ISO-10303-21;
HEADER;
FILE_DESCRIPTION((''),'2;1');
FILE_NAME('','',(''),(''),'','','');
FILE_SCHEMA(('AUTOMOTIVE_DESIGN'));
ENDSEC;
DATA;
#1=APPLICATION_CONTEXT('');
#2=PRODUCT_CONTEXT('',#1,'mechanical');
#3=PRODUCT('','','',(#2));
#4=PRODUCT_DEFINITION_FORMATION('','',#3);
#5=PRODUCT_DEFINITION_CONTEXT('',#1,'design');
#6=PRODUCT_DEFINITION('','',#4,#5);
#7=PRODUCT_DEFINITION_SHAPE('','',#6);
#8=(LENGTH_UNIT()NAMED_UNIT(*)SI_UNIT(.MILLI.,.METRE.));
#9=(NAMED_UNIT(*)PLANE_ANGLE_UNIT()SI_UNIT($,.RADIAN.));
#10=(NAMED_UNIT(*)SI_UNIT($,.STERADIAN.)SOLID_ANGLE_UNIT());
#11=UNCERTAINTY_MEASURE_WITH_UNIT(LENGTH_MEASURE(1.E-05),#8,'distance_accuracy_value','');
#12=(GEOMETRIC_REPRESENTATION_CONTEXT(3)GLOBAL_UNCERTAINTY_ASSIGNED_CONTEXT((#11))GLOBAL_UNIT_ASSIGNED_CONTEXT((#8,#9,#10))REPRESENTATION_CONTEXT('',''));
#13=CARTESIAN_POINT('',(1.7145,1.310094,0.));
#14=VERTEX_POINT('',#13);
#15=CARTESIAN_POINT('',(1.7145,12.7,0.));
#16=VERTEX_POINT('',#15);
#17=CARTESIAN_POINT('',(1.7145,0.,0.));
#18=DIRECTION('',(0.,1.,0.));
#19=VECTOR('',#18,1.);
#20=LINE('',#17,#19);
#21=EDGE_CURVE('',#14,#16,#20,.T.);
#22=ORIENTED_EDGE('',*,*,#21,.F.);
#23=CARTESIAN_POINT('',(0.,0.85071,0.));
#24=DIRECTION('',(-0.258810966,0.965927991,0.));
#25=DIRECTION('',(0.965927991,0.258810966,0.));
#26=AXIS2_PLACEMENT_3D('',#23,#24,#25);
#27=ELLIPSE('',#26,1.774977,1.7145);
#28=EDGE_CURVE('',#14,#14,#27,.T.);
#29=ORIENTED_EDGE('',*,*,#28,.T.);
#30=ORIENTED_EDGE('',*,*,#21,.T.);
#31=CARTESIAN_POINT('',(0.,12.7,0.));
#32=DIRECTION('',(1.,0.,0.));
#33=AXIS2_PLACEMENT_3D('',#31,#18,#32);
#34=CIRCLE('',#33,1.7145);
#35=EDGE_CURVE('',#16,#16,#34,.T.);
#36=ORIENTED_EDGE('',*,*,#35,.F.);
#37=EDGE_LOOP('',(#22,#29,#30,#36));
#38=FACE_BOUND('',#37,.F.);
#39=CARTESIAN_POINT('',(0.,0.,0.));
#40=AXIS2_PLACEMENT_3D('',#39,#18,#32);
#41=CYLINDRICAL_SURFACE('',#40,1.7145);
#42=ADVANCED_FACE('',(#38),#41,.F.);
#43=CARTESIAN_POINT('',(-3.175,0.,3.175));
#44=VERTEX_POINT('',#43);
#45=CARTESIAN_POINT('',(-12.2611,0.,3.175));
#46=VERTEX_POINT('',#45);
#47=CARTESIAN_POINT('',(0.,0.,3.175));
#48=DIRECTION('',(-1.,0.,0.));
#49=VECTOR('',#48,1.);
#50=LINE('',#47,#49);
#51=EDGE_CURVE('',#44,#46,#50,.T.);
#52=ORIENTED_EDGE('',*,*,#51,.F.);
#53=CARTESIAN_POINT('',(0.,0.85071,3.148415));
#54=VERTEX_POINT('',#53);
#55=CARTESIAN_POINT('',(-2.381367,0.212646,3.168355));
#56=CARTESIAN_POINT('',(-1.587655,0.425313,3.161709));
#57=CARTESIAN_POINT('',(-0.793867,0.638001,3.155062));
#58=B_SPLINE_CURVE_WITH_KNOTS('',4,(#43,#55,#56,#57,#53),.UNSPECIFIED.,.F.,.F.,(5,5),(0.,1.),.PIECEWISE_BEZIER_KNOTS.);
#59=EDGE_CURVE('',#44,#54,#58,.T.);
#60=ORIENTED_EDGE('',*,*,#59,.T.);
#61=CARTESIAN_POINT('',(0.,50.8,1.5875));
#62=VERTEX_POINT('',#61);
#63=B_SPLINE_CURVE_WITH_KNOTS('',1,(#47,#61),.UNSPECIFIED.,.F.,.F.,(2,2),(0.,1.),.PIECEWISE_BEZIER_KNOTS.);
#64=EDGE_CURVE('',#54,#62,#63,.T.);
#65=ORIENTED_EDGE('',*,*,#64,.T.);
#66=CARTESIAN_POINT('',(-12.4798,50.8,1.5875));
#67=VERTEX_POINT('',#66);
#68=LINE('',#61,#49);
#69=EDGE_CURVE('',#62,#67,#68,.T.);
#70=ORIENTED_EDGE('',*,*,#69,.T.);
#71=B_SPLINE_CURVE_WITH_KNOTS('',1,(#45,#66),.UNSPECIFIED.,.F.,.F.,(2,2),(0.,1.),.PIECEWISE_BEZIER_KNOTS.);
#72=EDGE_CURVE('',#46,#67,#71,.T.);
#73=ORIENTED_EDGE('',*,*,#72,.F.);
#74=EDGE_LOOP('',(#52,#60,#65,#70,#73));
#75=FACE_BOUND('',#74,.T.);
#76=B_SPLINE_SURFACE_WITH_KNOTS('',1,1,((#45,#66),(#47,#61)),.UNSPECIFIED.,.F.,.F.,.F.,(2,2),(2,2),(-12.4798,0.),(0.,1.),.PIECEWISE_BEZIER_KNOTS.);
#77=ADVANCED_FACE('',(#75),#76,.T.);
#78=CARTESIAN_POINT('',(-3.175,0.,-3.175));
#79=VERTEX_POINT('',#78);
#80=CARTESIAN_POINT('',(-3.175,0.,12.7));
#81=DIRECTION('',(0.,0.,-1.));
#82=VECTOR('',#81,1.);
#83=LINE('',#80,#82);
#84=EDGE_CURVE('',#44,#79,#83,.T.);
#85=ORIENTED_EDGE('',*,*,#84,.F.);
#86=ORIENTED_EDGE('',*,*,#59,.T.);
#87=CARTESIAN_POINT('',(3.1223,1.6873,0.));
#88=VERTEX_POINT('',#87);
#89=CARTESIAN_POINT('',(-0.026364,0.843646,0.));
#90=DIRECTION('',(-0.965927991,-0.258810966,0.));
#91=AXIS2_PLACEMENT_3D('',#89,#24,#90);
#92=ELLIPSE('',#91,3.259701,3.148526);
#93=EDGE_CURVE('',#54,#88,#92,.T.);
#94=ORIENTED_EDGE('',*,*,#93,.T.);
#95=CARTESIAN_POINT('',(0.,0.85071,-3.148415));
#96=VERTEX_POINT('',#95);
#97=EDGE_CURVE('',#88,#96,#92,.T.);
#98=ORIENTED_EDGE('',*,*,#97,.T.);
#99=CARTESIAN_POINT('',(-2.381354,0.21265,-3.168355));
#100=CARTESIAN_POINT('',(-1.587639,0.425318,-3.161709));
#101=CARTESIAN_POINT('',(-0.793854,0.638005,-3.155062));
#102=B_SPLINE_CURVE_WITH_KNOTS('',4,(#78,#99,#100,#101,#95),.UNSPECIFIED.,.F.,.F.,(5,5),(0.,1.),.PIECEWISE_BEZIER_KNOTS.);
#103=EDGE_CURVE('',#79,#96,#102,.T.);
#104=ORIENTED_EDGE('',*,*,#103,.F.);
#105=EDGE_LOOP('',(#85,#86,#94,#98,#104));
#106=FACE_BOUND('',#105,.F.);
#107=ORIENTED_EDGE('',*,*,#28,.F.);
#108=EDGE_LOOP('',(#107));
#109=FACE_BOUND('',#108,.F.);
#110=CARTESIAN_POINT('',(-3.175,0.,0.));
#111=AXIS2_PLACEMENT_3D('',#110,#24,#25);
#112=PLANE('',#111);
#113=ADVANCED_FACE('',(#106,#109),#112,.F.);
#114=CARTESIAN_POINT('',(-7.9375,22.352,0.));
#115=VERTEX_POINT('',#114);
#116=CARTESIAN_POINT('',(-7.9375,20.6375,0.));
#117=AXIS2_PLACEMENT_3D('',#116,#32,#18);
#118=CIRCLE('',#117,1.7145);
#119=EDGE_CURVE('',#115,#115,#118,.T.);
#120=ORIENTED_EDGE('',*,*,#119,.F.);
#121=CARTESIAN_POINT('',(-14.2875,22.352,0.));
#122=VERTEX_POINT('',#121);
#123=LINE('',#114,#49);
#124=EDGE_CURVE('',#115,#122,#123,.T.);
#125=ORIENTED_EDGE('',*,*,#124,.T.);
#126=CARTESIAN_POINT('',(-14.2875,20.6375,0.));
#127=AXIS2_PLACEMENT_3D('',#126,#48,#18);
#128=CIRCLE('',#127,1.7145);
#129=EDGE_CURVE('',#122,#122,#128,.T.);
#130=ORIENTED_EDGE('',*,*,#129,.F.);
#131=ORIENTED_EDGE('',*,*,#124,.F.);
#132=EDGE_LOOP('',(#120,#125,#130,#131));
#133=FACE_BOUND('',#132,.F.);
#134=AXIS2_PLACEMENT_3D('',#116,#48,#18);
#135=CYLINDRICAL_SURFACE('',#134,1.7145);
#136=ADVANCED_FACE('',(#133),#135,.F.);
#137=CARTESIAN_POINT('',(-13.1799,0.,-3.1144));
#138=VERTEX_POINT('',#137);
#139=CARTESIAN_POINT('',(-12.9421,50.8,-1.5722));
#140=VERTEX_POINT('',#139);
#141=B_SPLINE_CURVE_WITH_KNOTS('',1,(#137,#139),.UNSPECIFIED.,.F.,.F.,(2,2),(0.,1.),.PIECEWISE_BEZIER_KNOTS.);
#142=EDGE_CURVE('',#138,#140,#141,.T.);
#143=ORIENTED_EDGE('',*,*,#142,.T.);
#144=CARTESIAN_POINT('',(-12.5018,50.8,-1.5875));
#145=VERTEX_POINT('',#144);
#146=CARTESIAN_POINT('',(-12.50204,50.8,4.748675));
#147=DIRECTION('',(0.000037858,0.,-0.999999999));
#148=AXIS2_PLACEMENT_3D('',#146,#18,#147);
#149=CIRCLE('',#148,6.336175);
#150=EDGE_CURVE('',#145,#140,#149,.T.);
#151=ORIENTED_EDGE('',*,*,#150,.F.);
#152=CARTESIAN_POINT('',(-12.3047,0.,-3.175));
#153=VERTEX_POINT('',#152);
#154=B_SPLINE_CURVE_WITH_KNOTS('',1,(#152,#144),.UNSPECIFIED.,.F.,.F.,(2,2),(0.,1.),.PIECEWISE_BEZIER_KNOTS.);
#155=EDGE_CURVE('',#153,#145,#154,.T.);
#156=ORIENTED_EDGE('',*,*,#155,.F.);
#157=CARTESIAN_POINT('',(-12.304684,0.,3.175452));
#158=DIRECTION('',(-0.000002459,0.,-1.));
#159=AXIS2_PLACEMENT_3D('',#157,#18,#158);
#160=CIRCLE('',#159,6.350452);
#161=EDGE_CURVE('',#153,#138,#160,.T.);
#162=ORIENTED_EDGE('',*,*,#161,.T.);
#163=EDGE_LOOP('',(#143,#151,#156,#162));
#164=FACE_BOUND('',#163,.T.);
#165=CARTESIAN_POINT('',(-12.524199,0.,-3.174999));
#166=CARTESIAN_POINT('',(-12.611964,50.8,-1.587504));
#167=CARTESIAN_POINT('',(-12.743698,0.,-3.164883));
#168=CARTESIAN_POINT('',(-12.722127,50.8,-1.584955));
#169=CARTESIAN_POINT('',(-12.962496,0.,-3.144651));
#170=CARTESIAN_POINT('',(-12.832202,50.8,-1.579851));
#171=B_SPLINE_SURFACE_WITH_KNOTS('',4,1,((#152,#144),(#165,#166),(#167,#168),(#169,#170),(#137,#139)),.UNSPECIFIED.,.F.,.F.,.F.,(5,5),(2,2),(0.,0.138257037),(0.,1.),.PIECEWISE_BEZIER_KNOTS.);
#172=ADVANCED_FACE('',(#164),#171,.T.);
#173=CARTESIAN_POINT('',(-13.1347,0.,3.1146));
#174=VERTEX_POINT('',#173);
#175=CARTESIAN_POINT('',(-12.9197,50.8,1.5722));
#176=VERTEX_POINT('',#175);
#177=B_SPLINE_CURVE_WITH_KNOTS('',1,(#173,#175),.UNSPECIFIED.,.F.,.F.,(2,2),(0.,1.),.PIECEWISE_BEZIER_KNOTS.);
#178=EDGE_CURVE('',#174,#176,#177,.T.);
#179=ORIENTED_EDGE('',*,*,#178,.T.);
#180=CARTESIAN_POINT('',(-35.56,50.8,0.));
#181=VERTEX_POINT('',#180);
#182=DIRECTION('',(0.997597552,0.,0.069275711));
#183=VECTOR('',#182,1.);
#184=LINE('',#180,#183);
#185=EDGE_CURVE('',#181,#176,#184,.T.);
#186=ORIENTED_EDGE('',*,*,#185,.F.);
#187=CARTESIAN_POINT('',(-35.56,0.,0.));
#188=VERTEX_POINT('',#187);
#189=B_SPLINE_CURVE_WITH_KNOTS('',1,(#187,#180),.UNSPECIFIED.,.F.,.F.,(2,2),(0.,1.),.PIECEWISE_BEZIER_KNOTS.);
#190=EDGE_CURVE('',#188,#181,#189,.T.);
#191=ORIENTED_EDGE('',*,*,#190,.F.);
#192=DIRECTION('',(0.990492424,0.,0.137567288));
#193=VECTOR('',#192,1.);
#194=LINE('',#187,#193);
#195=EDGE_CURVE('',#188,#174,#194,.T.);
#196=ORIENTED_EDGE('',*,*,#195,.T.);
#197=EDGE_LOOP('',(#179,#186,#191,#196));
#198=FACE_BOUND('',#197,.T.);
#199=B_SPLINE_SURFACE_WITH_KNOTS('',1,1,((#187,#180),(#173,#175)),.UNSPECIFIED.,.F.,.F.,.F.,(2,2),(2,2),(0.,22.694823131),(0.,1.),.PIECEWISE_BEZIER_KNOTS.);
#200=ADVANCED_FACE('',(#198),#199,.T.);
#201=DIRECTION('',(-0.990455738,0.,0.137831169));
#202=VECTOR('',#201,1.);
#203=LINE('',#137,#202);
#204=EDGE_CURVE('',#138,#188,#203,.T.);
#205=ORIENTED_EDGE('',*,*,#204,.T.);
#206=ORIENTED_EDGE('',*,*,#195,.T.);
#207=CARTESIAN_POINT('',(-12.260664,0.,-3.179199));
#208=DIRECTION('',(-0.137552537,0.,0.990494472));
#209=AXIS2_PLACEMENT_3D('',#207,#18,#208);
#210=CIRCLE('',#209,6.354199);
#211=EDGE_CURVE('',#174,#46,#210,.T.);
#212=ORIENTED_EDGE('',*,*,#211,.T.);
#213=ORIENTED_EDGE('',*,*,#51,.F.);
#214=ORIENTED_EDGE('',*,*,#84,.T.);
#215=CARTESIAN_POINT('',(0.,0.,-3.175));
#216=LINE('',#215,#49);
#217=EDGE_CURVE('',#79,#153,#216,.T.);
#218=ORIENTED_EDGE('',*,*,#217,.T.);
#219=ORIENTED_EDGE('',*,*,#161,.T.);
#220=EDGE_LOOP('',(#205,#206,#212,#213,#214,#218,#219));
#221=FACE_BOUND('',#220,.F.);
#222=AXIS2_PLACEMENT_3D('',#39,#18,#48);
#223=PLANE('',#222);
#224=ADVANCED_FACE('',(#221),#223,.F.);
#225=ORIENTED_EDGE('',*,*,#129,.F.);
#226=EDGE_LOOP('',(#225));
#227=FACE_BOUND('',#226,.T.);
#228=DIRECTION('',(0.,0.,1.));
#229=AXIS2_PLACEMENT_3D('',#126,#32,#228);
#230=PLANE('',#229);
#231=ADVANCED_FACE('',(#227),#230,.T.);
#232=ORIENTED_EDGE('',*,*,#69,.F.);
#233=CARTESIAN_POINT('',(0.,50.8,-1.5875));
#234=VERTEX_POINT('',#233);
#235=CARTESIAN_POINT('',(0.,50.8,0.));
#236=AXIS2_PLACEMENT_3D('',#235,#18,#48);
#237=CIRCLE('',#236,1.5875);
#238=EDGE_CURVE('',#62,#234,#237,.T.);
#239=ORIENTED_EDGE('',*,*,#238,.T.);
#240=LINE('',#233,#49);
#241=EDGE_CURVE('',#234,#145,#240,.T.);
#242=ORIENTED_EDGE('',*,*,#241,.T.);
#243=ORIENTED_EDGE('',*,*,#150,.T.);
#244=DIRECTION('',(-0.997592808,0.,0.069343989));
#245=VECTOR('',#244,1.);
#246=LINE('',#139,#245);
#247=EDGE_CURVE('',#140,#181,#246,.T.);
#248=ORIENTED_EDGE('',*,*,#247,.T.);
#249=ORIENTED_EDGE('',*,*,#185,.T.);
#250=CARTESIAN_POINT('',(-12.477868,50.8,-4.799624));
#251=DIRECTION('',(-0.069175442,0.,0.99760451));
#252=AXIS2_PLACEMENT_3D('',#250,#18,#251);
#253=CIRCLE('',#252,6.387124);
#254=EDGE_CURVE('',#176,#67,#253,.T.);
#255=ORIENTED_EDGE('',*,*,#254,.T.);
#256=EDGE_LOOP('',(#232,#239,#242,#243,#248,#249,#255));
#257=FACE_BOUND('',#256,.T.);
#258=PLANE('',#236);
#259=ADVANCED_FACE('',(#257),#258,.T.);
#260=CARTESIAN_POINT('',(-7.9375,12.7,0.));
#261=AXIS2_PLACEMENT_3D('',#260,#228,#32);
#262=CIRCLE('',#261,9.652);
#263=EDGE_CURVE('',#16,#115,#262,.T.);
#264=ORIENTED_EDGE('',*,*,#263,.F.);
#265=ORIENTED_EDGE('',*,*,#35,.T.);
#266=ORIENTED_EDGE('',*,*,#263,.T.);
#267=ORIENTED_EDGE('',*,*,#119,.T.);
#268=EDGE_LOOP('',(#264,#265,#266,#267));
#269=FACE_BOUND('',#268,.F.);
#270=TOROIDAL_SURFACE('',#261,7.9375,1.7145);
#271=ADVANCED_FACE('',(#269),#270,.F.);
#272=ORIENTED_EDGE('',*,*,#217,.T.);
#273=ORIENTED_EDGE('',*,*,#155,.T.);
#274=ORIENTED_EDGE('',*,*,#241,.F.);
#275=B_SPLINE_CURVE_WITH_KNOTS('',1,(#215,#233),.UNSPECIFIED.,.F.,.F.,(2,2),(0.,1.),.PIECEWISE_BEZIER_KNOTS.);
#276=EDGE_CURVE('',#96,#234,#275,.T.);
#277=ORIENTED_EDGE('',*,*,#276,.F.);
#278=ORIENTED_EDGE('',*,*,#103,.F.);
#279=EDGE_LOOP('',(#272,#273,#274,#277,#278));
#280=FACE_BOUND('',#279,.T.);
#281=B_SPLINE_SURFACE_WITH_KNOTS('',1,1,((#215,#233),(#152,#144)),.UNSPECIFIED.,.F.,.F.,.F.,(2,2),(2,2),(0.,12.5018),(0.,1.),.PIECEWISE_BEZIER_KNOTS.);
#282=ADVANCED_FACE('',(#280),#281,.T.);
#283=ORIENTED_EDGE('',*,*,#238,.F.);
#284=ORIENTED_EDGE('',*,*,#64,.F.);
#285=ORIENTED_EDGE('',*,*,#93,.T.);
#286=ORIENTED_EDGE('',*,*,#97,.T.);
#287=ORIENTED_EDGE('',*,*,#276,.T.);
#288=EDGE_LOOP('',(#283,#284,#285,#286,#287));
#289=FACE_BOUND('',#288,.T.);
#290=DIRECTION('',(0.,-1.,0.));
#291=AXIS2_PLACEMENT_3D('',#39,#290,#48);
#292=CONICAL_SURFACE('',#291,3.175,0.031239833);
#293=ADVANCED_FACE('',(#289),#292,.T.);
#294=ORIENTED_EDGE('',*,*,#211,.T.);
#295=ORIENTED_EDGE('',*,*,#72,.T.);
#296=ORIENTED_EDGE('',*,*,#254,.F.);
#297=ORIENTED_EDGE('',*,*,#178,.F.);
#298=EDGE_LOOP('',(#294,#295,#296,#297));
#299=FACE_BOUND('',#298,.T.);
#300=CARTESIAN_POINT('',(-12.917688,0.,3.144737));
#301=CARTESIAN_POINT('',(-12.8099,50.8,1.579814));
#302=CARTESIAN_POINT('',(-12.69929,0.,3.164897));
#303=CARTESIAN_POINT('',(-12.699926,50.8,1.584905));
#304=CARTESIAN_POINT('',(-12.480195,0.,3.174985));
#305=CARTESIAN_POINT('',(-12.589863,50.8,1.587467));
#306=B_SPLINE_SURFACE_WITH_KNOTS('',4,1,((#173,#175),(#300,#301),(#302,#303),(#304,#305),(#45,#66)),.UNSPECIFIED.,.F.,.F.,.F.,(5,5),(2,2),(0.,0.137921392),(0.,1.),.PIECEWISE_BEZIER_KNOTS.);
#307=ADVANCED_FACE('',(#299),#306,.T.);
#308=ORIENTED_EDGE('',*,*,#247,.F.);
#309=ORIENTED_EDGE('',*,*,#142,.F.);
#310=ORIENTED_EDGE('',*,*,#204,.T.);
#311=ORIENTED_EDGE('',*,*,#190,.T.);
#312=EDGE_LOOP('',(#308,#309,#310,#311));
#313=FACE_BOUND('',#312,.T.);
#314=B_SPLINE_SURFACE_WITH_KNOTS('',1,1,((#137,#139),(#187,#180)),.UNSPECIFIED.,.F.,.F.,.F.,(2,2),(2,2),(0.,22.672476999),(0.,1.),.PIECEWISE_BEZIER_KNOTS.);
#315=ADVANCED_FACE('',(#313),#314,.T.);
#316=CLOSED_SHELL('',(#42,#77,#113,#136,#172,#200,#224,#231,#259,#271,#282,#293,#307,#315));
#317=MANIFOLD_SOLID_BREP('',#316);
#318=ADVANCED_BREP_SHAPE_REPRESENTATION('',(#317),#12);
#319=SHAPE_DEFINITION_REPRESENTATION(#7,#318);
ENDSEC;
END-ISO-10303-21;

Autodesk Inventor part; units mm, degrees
ref_plane "YZ Plane" through (0, 0, 0) normal (1, 0, 0) x (0, 1, 0)
ref_plane "XY Plane" through (0, 0, 0) normal (0, 0, 1) x (1, 0, 0)
sketch "Sketch2" plane through (0, 0, 0) normal (0, 1, 0) x (-1, 0, 0)
  circle A0 centre (0, 0) radius 3.175
  line L0 (0, 0) -> (35.56, 0)
  line L1 (0, 3.175) -> (12.2611, 3.175)
  line L2 (0, -3.175) -> (12.3047, -3.175)
  line L3 (13.1799, -3.1144) -> (35.56, 0)
  line L4 (35.56, 0) -> (13.1347, 3.1146)
  arc A1 (13.1347, 3.1146) -> (12.2611, 3.175) centre (12.2611, -3.175) ccw
  arc A2 (12.3047, -3.175) -> (13.1799, -3.1144) centre (12.3047, 3.175) ccw
  circle A3 centre (0, 0) radius 1.5875
  point P0 (12.7, 3.175)
  dimension "d5" = 6.35
  dimension "d6" = 35.56
  dimension "d7" = 12.7
  dimension "d8" = 6.35
  dimension "d9" = 6.35
  dimension "d12" = 3.175
ref_plane "Work Plane1" through (0, 50.8, 0) normal (0, 1, 0) x (-1, 0, 0)
sketch "Sketch3" plane through (0, 50.8, 0) normal (0, 1, 0) x (-1, 0, 0)
  circle A0 centre (0, 0) radius 1.5875
  line L0 (0, 1.5875) -> (12.4798, 1.5875)
  line L1 (0, -1.5875) -> (12.5018, -1.5875)
  line L2 (12.9421, -1.5722) -> (35.56, 0)
  line L3 (35.56, 0) -> (12.9197, 1.5722)
  arc A1 (12.9197, 1.5722) -> (12.4798, 1.5875) centre (12.4798, -4.7625) ccw
  arc A2 (12.5018, -1.5875) -> (12.9421, -1.5722) centre (12.5018, 4.7625) ccw
  point P0 (12.7, 1.5875)
  dimension "d14" = 3.175
  dimension "d15" = 12.7
  dimension "d16" = 6.35
  dimension "d17" = 6.35
loft "Loft1" add profiles "Sketch2", "Sketch3" contours A0 | L0 L3 A2 L2 A0 | A0 L1 A1 L4 L0 | A3 / all
sketch "Sketch4" plane through (0, 0, 0) normal (0, 0, 1) x (1, 0, 0)
  line L0 (-12.2611, 0) -> (0, 0) projected
  line L1 (0, 0) -> (0, 12.7)
  line L2 (0, 0) -> (0, 50.8) projected
  line L3 (0, 12.7) -> (-7.9375, 12.7)
  line L4 (-7.9375, 12.7) -> (-7.9375, 20.6375)
  arc A0 (0, 12.7) -> (-7.9375, 20.6375) centre (-7.9375, 12.7) ccw
  line L5 (-7.9375, 20.6375) -> (-14.2875, 20.6375)
  dimension "d22" = 12.7
  dimension "d23" = 7.9375
  dimension "d24" = 7.9375
  dimension "d25" = 6.35
sketch "Sketch5" plane through (-12.3047, 0, -3.175) normal (0, -1, 0) x (1, 0, 0)
  circle A0 centre (12.3047, 3.175) radius 1.7145
  dimension "d26" = 3.429
sweep "Sweep1" cut profiles "Sketch5" path "Sketch4" path curves L1 A0 L5
sketch "Sketch6" plane through (0, 0, 0) normal (0, 0, 1) x (1, 0, 0)
  line L0 (3.175, 0) -> (0, 0) projected
  line L1 (3.175, 0) -> (-3.175, 0)
  line L2 (0, 0) -> (-12.3047, 0) projected
  line L3 (-3.175, 0) -> (3.1223, 1.6873)
  line L4 (3.175, 0) -> (1.5875, 50.8) projected
  dimension "d29" = 6.35
  dimension "d30" = 15
extrude "Extrusion3" cut sketch "Sketch6" along normal mid plane 25.4
properties part number "DivePlanesControlSurface"
